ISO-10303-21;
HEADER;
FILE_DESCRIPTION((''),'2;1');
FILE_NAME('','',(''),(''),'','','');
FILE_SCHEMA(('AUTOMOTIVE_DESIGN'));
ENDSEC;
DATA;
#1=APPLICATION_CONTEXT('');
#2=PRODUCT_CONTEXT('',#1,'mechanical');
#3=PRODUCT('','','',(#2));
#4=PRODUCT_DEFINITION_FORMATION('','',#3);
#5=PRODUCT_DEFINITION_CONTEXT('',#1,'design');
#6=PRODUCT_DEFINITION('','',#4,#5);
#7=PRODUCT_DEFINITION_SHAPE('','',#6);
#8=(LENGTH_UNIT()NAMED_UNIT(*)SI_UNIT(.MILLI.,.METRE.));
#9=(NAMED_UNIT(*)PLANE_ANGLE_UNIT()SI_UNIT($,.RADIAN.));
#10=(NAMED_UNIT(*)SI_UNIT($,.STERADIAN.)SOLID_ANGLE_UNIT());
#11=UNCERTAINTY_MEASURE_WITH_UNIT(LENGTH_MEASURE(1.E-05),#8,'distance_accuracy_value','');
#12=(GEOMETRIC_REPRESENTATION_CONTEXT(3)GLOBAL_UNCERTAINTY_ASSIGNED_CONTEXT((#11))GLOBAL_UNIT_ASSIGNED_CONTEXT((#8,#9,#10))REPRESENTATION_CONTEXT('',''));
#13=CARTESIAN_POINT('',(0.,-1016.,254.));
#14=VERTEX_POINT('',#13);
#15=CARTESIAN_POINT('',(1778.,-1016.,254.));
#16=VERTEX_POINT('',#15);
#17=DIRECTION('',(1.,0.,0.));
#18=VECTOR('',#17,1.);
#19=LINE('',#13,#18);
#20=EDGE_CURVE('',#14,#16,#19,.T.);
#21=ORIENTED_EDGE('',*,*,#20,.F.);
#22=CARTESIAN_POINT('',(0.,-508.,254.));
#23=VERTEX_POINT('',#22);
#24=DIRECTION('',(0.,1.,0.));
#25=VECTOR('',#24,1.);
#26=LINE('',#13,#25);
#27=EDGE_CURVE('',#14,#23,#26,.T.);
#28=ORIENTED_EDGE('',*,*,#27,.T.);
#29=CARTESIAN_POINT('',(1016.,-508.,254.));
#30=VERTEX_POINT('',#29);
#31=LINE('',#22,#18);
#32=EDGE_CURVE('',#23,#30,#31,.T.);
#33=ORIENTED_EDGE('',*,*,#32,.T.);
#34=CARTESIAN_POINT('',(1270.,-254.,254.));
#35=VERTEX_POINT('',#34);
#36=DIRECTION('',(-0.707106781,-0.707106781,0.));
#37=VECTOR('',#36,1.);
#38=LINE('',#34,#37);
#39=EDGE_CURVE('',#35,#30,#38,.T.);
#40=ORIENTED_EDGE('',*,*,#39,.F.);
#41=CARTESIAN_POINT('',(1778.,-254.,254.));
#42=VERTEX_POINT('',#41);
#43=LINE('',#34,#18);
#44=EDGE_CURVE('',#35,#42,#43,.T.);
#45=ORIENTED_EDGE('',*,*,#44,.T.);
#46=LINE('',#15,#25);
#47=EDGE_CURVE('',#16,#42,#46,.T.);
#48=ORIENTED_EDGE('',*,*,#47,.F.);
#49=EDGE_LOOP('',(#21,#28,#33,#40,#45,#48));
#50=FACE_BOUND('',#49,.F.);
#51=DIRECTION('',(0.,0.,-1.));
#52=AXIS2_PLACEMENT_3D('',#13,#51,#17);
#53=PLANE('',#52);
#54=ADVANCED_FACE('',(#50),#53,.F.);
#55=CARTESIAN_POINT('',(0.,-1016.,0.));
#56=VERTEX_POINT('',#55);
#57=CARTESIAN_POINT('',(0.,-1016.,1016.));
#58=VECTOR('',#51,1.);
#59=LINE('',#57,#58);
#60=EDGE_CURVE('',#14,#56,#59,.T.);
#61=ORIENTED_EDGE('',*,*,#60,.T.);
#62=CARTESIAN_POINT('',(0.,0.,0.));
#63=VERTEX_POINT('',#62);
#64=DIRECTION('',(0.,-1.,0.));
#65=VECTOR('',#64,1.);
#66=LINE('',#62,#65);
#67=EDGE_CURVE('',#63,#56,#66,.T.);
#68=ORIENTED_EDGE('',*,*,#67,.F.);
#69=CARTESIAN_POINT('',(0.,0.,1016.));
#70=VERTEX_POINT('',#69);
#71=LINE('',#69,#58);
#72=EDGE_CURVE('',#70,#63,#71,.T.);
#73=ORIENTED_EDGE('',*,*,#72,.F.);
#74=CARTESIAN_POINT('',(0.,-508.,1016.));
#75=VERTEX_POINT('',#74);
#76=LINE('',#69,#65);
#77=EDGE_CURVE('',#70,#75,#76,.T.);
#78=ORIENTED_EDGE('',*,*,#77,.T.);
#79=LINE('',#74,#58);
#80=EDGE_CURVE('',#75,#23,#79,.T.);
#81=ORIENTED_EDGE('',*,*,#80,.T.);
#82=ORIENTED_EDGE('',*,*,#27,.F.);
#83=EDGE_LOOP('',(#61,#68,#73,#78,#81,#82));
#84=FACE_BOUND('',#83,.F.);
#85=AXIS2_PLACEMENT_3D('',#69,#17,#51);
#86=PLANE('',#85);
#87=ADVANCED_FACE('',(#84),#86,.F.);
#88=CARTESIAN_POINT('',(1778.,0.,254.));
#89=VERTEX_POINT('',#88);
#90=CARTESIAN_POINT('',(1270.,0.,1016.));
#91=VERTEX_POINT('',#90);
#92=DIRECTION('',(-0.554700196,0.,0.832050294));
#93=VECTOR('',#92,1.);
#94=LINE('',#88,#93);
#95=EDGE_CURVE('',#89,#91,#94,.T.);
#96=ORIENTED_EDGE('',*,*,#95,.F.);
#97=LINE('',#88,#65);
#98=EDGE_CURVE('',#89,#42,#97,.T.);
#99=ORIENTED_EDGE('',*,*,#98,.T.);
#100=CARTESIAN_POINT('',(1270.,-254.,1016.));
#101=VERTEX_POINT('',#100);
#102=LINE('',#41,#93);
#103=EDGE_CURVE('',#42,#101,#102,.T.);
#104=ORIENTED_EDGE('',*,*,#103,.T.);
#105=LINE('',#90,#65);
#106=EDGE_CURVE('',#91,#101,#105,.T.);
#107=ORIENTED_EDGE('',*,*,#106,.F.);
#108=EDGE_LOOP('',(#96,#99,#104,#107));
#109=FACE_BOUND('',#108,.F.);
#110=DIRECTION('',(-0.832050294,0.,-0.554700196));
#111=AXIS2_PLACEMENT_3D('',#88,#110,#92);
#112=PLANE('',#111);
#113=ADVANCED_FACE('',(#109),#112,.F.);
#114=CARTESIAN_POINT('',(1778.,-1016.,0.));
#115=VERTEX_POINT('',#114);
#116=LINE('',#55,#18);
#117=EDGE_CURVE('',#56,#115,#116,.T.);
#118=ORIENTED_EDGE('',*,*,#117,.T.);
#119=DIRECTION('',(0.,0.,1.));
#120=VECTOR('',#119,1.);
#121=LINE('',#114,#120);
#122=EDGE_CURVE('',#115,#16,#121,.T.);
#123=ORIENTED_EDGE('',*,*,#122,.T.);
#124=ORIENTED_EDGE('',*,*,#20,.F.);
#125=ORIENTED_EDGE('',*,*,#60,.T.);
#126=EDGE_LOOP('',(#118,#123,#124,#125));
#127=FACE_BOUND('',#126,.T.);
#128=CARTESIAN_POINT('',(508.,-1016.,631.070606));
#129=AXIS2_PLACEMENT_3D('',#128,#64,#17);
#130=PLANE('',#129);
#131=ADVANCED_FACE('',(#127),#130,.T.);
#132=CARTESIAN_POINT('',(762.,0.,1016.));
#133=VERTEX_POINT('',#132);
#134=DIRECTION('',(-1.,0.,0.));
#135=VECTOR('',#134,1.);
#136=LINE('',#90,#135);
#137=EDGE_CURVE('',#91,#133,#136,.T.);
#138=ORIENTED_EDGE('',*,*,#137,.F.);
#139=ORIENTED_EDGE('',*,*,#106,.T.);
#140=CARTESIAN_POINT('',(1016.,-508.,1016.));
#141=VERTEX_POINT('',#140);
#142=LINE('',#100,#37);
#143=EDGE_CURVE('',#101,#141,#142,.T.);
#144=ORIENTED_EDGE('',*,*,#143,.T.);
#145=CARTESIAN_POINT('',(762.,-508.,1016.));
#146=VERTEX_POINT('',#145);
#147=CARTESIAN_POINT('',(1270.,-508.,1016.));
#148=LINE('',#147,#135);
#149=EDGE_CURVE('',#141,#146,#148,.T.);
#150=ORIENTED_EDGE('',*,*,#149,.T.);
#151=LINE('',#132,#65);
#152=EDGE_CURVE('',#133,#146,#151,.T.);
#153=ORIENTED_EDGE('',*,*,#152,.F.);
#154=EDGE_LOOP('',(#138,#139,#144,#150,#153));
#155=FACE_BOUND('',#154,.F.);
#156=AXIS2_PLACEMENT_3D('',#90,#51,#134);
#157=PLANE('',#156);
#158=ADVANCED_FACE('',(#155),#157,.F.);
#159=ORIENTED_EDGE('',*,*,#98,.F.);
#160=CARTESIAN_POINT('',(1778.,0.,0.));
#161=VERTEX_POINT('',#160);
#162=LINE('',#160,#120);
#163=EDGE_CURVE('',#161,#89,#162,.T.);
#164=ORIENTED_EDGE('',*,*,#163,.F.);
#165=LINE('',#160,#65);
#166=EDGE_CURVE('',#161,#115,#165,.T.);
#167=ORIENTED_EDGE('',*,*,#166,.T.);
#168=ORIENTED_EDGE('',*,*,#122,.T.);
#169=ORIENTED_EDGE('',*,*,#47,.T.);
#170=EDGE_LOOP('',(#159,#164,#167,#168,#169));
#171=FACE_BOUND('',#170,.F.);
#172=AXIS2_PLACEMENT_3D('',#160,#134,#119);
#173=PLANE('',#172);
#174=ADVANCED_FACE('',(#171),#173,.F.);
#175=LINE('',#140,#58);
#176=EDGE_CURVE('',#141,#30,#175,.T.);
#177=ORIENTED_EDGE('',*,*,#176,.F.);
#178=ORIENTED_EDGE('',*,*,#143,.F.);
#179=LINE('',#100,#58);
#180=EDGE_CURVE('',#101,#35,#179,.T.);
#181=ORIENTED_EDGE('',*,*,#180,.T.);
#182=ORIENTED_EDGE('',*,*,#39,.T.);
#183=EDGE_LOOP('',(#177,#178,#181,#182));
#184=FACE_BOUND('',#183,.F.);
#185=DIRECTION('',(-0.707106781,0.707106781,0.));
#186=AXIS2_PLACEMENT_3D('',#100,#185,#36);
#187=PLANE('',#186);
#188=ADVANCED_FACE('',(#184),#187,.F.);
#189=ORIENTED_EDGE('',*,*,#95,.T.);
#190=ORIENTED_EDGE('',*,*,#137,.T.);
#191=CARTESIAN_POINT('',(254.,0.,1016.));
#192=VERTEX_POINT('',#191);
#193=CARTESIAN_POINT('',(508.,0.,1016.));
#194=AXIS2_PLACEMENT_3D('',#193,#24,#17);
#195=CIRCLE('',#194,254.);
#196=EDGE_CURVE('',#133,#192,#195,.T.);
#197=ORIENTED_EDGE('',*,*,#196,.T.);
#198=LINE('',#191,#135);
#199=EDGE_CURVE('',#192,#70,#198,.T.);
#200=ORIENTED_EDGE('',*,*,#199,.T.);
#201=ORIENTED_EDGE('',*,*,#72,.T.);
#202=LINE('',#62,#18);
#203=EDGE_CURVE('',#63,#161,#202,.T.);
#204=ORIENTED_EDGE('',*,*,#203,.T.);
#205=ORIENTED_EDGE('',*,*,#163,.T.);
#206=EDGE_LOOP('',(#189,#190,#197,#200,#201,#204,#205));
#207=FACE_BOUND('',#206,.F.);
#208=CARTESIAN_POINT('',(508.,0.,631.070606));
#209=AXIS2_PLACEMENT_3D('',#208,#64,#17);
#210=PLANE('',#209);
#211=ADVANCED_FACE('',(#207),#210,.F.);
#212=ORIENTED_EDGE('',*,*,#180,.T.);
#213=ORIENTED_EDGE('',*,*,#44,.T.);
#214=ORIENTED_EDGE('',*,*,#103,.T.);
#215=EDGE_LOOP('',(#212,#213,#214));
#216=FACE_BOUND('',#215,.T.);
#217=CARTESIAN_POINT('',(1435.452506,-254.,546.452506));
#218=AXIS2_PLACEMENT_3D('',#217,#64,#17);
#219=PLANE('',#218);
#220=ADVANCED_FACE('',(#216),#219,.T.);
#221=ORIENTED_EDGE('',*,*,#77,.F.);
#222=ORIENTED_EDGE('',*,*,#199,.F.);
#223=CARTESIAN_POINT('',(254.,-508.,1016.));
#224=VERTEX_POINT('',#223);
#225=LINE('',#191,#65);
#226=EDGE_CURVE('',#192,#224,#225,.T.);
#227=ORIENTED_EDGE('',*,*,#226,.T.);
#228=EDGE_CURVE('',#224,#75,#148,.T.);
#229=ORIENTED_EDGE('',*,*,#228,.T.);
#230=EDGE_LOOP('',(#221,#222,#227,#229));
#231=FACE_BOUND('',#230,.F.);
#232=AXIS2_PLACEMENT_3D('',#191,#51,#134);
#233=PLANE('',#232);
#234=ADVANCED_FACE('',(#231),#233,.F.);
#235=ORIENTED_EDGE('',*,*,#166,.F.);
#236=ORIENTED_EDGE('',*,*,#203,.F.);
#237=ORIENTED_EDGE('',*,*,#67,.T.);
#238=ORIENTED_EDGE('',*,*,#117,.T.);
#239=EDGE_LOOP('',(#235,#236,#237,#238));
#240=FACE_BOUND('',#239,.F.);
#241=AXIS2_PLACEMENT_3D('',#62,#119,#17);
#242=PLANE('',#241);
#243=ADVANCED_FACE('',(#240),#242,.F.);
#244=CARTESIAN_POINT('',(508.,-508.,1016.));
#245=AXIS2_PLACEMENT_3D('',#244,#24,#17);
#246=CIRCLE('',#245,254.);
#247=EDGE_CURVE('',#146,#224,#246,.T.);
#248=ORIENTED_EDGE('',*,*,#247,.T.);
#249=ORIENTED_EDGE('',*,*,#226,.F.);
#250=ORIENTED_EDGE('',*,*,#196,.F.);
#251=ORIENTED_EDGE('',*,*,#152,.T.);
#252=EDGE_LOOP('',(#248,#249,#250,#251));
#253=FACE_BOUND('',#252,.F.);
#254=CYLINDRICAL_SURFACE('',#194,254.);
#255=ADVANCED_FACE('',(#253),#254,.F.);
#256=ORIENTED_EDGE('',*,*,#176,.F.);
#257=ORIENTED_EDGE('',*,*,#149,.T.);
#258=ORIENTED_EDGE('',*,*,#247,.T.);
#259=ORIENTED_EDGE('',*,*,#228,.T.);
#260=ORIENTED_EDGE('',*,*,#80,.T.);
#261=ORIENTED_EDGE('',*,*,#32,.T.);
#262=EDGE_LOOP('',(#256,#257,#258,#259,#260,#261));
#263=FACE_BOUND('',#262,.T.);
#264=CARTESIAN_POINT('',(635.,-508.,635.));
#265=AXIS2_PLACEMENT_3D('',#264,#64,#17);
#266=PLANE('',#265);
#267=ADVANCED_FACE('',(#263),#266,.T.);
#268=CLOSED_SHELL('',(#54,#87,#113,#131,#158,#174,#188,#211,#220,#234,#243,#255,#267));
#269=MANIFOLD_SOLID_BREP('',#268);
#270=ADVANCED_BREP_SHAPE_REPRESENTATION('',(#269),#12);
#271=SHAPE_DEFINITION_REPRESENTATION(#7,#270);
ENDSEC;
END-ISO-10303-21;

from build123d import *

# Parameters (mm, degrees)
F0_W     = 254
F0_H     = 762
F1_DEPTH = 1016
F2_R     = 254
F3_DEPTH = 1064.26
F5_DEPTH = 508
F7_DEPTH = 254
F9_DEPTH = 762


with BuildPart() as f1:
    # F0 (on Front) → F1 (new body)
    with BuildSketch(Plane.XZ):
        with BuildLine():
            Line((0, 1016), (0, 254))
            Line((0, 254), (1016, 254))
            Line((1016, 254), (1016, 1016))
            Line((1016, 1016), (762, 1016))
            ThreePointArc((762, 1016), (508, 762), (254, 1016))
            Line((254, 1016), (0, 1016))
        make_face()
        Polygon((0, 254), (0, 0), (1778, 0), (1778, 254), (1270, 254), (1016, 254), align=None)
        with Locations((1143, 635)):
            Rectangle(F0_W, F0_H)
        Polygon((1270, 254), (1778, 254), (1270, 1016), align=None)
    extrude(amount=F1_DEPTH)

    # F2 (on face) → F3 (cut)
    with BuildSketch(Plane.XZ.offset(1016)):
        with Locations((508, 1016)):
            Circle(F2_R)
    extrude(amount=-F3_DEPTH, mode=Mode.SUBTRACT)

    # F4 (on face) → F5 (cut)
    with BuildSketch(Plane.XZ.offset(1016)):
        Polygon((1270, 254), (1270, 1016), (254, 1016), (0, 1016), (0, 254), align=None)
        Polygon((1778, 254), (1270, 1016), (1270, 254), align=None)
    extrude(amount=-F5_DEPTH, mode=Mode.SUBTRACT)

    # F6 (on face) → F7 (cut)
    with BuildSketch(Plane.XZ.offset(508)):
        Polygon((1778, 254), (1270, 1016), (1270, 254), align=None)
    extrude(amount=-F7_DEPTH, mode=Mode.SUBTRACT)

    # F8 (on face) → F9 (cut)
    with BuildSketch(Plane.XY.offset(1016)):
        Polygon((1270, -508), (1270, -254), (1016, -508), align=None)
    extrude(amount=-F9_DEPTH, mode=Mode.SUBTRACT)


solid = f1.part
